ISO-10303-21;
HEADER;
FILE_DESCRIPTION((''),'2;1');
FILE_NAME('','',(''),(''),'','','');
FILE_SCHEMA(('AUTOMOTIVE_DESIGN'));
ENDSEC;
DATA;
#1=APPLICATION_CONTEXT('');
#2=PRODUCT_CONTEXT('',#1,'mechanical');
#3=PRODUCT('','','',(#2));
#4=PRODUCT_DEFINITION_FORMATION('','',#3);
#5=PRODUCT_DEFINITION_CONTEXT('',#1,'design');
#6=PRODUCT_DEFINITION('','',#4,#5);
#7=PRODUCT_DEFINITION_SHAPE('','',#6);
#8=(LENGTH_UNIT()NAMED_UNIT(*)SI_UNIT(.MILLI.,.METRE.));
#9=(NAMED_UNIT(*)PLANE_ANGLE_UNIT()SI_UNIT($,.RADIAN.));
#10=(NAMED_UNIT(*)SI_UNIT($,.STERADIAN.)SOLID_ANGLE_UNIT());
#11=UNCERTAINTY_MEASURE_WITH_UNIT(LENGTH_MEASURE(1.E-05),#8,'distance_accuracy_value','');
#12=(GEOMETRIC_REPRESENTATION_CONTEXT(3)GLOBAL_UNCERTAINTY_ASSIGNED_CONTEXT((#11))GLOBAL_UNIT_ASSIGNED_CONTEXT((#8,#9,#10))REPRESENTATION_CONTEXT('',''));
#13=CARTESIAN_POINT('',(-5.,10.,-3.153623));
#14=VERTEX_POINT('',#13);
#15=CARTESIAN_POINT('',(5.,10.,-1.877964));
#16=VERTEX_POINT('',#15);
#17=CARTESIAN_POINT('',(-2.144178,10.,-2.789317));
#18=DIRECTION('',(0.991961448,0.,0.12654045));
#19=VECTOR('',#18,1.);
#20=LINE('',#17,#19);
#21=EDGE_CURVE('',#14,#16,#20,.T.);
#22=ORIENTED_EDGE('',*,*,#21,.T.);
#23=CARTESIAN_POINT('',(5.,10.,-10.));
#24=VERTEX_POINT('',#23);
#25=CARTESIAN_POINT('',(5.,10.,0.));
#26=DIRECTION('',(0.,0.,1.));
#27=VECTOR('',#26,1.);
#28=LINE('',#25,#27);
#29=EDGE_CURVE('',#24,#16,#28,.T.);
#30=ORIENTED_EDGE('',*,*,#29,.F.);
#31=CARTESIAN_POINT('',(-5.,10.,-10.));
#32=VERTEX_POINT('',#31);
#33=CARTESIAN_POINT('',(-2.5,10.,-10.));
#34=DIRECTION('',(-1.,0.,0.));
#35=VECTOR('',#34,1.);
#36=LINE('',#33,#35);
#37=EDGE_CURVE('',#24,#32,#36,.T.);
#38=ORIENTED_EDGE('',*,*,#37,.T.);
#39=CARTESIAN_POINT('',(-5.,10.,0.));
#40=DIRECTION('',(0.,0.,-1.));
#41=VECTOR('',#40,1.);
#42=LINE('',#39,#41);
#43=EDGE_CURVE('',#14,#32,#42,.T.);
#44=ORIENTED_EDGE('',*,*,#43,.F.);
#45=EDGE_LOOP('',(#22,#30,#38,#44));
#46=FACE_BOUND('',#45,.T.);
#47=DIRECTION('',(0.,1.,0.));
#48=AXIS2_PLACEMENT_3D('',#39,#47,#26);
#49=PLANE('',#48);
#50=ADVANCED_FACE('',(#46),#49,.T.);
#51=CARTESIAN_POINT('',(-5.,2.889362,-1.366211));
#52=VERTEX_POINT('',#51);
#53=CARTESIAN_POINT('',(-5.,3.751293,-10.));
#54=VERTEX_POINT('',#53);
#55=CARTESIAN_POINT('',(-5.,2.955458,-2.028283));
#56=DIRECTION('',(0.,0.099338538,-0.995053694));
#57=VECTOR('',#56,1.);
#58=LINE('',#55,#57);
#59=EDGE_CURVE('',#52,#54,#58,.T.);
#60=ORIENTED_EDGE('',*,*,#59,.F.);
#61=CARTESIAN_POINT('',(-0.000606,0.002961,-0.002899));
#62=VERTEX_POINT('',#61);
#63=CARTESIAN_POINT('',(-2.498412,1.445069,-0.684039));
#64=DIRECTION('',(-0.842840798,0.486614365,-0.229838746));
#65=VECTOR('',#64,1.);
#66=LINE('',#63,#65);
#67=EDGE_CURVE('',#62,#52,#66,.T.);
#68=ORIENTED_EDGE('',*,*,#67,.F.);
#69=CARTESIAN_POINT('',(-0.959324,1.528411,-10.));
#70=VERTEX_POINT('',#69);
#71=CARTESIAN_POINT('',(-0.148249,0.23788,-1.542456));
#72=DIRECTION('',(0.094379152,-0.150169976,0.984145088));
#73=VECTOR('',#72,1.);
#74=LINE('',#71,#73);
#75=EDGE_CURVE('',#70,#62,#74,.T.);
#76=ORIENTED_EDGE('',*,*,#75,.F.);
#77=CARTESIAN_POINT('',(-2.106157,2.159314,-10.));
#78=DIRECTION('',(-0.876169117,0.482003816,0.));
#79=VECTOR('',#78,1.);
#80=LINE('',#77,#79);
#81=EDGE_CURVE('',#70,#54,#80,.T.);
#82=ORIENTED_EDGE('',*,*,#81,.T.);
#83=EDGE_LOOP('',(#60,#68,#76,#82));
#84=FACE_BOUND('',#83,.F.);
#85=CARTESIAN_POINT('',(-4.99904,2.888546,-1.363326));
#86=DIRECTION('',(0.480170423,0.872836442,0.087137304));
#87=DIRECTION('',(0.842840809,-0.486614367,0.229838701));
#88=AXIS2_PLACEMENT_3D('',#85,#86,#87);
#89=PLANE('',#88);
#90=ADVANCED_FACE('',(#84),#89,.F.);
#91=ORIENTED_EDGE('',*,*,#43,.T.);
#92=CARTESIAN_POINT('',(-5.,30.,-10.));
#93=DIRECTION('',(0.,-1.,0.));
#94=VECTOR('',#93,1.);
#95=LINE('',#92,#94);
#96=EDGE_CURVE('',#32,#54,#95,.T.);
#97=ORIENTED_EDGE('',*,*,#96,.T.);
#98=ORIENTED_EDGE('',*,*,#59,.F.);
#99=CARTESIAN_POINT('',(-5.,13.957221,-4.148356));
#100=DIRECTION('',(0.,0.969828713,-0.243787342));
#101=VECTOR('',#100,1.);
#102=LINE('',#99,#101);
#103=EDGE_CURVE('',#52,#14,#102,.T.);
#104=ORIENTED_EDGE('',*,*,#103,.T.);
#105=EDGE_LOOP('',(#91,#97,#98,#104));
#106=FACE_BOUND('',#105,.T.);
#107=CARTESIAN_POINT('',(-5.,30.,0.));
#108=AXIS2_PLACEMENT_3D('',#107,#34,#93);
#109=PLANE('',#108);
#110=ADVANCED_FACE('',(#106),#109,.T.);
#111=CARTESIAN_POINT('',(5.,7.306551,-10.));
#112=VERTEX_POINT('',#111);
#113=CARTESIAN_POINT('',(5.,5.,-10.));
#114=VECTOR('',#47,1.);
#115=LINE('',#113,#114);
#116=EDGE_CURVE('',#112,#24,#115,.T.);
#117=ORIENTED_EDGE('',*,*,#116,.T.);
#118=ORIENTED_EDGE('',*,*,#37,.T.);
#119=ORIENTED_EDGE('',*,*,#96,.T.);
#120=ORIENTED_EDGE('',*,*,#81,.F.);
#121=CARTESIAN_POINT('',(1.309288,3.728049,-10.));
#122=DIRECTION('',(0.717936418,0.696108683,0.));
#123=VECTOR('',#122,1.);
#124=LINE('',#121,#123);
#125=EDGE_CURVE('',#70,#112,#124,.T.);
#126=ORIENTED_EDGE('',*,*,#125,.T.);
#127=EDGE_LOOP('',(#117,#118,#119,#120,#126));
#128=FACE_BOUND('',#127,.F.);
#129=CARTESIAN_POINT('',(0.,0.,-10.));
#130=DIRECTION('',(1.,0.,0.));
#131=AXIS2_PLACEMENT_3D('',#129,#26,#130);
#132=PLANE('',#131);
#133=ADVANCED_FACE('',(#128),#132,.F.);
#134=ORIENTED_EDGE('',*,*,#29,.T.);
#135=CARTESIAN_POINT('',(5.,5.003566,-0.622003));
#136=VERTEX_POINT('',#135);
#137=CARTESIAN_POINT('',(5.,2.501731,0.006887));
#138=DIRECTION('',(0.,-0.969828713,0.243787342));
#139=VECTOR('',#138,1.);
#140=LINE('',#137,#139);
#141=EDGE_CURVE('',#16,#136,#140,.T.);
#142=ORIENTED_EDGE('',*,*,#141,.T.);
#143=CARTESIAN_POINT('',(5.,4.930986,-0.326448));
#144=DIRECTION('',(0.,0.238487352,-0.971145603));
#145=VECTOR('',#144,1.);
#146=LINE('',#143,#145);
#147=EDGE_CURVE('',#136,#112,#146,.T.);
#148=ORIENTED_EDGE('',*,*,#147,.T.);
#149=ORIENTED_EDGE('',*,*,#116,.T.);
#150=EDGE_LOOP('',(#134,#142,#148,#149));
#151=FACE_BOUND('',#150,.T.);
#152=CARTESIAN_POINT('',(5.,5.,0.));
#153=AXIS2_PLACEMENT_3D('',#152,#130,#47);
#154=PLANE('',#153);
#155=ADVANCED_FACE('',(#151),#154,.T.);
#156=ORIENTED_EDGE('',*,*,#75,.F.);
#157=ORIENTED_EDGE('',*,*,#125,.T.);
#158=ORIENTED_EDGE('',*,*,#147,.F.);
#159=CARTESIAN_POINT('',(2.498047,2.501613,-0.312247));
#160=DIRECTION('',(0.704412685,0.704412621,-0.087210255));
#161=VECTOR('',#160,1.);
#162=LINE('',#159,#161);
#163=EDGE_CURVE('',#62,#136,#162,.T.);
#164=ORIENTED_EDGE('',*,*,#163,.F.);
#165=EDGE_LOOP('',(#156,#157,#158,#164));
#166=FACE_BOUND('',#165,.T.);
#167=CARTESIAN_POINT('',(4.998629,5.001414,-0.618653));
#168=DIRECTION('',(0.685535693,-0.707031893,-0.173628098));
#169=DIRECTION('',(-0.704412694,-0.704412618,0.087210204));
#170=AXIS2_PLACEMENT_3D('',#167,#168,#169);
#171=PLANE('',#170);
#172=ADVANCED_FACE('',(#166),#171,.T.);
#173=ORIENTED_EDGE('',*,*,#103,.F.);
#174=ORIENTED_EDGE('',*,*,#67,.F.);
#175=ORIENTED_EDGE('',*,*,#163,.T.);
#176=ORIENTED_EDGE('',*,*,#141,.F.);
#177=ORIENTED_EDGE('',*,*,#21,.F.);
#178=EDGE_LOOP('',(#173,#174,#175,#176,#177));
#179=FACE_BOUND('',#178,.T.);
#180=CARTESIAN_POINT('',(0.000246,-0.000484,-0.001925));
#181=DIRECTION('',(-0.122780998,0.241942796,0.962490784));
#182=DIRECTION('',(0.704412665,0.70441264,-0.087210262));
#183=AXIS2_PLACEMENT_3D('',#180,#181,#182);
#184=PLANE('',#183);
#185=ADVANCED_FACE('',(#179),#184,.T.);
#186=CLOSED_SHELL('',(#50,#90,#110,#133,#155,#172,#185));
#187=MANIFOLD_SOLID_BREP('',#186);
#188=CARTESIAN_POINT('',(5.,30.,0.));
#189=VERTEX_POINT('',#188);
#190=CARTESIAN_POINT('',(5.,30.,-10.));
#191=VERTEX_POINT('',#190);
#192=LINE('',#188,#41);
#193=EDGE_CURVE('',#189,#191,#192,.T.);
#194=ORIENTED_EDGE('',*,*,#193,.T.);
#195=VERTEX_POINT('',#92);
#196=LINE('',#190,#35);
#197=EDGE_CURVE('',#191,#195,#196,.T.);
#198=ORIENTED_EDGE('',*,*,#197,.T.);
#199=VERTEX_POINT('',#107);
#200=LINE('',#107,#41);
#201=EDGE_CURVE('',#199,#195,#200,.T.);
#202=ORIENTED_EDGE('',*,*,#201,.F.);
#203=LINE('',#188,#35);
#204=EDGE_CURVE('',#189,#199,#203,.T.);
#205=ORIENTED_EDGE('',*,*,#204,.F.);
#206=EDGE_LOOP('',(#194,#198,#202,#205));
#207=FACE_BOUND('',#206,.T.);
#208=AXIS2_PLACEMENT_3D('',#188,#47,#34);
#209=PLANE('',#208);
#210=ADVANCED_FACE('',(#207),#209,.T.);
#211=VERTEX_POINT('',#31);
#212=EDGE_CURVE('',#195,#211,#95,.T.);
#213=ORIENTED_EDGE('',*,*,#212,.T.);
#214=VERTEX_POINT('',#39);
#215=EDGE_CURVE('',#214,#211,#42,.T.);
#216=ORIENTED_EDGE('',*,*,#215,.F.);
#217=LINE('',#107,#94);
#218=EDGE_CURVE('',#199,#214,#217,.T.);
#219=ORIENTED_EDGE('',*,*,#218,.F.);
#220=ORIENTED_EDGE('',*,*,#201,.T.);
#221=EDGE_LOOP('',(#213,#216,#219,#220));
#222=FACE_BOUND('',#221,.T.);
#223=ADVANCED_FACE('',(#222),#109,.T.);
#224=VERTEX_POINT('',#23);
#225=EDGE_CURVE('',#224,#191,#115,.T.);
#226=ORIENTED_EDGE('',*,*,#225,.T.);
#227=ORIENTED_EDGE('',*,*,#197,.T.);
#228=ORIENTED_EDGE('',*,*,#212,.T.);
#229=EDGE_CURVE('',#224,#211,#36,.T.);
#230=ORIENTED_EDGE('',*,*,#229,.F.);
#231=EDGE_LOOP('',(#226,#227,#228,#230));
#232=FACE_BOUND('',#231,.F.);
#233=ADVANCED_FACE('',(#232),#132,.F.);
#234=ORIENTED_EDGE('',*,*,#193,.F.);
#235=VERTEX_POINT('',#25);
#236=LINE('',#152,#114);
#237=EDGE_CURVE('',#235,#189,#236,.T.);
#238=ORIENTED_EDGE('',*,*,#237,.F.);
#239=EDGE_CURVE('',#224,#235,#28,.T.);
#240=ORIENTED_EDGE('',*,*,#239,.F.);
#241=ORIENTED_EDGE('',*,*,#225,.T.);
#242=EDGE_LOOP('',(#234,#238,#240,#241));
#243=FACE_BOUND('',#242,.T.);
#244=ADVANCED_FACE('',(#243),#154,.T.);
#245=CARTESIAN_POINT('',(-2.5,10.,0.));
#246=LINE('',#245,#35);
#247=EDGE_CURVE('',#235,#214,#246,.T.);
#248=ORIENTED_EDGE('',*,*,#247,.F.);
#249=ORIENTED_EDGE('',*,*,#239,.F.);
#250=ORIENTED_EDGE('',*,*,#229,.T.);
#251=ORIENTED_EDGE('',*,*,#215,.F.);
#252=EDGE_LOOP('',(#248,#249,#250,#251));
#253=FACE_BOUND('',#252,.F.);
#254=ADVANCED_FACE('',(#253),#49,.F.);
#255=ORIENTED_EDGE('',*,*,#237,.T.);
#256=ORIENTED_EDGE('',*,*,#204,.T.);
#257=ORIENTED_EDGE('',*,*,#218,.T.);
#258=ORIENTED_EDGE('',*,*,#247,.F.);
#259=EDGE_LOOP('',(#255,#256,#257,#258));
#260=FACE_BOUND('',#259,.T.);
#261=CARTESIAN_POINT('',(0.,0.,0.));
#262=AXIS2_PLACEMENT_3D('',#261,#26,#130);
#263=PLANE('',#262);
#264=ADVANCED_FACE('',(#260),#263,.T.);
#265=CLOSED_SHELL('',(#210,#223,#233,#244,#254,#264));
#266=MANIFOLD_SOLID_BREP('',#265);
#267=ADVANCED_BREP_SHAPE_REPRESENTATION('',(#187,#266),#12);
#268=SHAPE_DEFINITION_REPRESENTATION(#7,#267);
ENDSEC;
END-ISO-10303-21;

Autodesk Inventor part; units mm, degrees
sketch "草图1" plane through (0, 0, 0) normal (0, 0, 1) x (1, 0, 0)
  line L0 (0, 0) -> (5, 0)
  line L1 (5, 5) -> (5, 30)
  line L2 (5, 30) -> (-5, 30)
  line L3 (-5, 30) -> (-5, 2.8868)
  line L4 (-5, 0) -> (5, 0)
  line L5 (0, 0) -> (5, 5)
  line L6 (0, 0) -> (7.0711, 0) construction
  line L7 (0, 0) -> (-5, 2.8868)
  line L8 (0, 0) -> (5.7735, 0) construction
  dimension "d0" = 5
  dimension "d1" = 30
  dimension "d2" = 10
  dimension "d5" = 45
  dimension "d6" = 150
extrude "拉伸1" add sketch "草图1" against normal blind 10
sketch "草图2" plane through (0, 0, 0) normal (0.7071068, -0.7071068, 0) x (-0.7071068, -0.7071068, 0)
  line L0 (0, 0) -> (-7.0711, 0) projected
  line L1 (0, 0) -> (-7.0713, 0.6187)
  line L2 (0, 0) -> (7.0983, 0) construction
  dimension "d7" = 175
ref_plane "工作平面4" through (-5, 10, 0) normal (0, 1, 0) x (1, 0, 0)
split body "分割1" result two bodies by plane through (-5, 10, 0) normal (0, 1, 0) first body at (1.6667, 16.6667, -0.5)
sketch3d "三维草图1"
ref_plane "副正交平面" through (0, 0, 0) normal (0.8660254, -0.5, 0) x (0.5, 0.8660254, 0)
sketch "草图4" plane through (5, 5, 0) normal (1, 0, 0) x (0, 0, -1)
  line L0 (0, 0) -> (10, 0) projected
  line L1 (0.6208, 0) -> (0.6208, 25)
  line L2 (0, 25) -> (10, 25) projected
  point P0 (0, -5)
sketch "草图5" plane through (-5, 30, 0) normal (0, 1, 0) x (1, 0, 0)
  line L0 (5, 0) -> (10, 0.619)
  line L1 (10, 0) -> (10, 10) projected
  line L2 (10, 0) -> (0, 0) projected
  line L3 (5, 0) -> (10, 0)
  line L4 (10, 0) -> (10, 0.619)
extrude "拉伸2" cut sketch "草图5" against normal blind 30 bodies 3
ref_plane "正交平面2" through (0, 0, 0) normal (-0.7071068, -0.7071068, 0) x (0, 0, -1)
ref_plane "正交平面" through (5, 5, 0) normal (-0.7071068, -0.7071068, 0) x (0, 0, -1)
sketch "草图6" plane through (0, 0, 0) normal (-0.7071068, -0.7071068, 0) x (0, 0, -1)
  line L0 (0, 0) -> (0, -21.2132) projected
  line L1 (0, 0) -> (2.4419, -9.1132)
  line L2 (0, 0) -> (9.4347, 0) construction
  line L3 (0, -24.7487) -> (0, -5.5768) projected
  line L4 (0, -5.5768) -> (0, 0) projected
  line L5 (0, 0) -> (10.9149, -1.9246)
  line L6 (0, 0) -> (11.0833, 0) construction
  dimension "d11" = 75
  dimension "d18" = 10
sketch "草图7" plane through (-5, 2.8868, 0) normal (-1, 0, 0) x (0, 0, 1)
  point P0 (0, -2.8868)
ref_plane "工作平面3" through (0, 0, 0) normal (-0.122781, 0.2419428, 0.9624908) x (0.7044127, 0.7044127, -0.0872102)
sketch "草图8" plane through (0, 0, 0) normal (-0.122781, 0.2419428, 0.9624908) x (0.7044127, 0.7044127, -0.0872102)
  line L0 (0, 0) -> (7.0441, 6.6728) projected
  line L1 (0, 0) -> (15, 0)
  line L2 (15, 0) -> (15, 15)
  line L3 (15, 15) -> (-5, 15)
  line L4 (-5, 15) -> (-5, 0)
  line L5 (0, 0) -> (0.8721, 2.5692) projected
  line L6 (-5, 0) -> (0, 0)
  dimension "d13" = 15
  dimension "d14" = 15
  dimension "d15" = 20
extrude "拉伸3" cut sketch "草图8" along normal blind 30 bodies 3
ref_plane "工作平面5" through (0, 0, 0) normal (-0.3968015, -0.6444766, -0.6536042) x (0.6830127, -0.6830127, 0.258819)
ref_plane "工作平面6" through (5, 5, -0.619) normal (0.6855357, -0.7070319, -0.1736281) x (-0.7044127, -0.7044127, 0.0872102)
sketch "草图9" plane through (5, 5, -0.619) normal (0.6855357, -0.7070319, -0.1736281) x (-0.7044127, -0.7044127, 0.0872102)
  line L0 (-3.1536, -1.7614) -> (-3.9393, 13.0649)
  line L1 (-3.9393, 13.0649) -> (12.5056, 12.3251)
  line L2 (12.5056, 12.3251) -> (9.2397, -2.319)
  line L3 (9.2397, -2.319) -> (-3.1536, -1.7614)
  point P0 (7.0981, 0)
extrude "拉伸4" cut sketch "草图9" along normal blind 10 bodies 3
sketch "草图10" plane through (0, 0, 0) normal (0.8660254, -0.5, 0) x (0.5, 0.8660254, 0)
  line L0 (0, 0) -> (1.0379, -11.8633)
  line L1 (0, 0) -> (11.9087, 0) construction
  dimension "d21" = 85
ref_plane "工作平面8" through (-5, 2.8868, -1.3635) normal (0.4801704, 0.8728364, 0.0871373) x (0.8428408, -0.4866144, 0.2298387)
sketch "草图11" plane through (-5, 2.8868, -1.3635) normal (0.4801704, 0.8728364, 0.0871373) x (0.8428408, -0.4866144, 0.2298387)
  line L0 (-8.1584, -1.617) -> (10.6055, -5.6683)
  line L1 (10.6055, -5.6683) -> (13.6618, 13.1312)
  line L2 (13.6618, 13.1312) -> (-7.6964, 11.7807)
  line L3 (-7.6964, 11.7807) -> (-8.1584, -1.617)
  point P0 (5.9323, 0)
extrude "拉伸5" cut sketch "草图11" against normal blind 10 bodies 3
properties part number "主副偏角"
